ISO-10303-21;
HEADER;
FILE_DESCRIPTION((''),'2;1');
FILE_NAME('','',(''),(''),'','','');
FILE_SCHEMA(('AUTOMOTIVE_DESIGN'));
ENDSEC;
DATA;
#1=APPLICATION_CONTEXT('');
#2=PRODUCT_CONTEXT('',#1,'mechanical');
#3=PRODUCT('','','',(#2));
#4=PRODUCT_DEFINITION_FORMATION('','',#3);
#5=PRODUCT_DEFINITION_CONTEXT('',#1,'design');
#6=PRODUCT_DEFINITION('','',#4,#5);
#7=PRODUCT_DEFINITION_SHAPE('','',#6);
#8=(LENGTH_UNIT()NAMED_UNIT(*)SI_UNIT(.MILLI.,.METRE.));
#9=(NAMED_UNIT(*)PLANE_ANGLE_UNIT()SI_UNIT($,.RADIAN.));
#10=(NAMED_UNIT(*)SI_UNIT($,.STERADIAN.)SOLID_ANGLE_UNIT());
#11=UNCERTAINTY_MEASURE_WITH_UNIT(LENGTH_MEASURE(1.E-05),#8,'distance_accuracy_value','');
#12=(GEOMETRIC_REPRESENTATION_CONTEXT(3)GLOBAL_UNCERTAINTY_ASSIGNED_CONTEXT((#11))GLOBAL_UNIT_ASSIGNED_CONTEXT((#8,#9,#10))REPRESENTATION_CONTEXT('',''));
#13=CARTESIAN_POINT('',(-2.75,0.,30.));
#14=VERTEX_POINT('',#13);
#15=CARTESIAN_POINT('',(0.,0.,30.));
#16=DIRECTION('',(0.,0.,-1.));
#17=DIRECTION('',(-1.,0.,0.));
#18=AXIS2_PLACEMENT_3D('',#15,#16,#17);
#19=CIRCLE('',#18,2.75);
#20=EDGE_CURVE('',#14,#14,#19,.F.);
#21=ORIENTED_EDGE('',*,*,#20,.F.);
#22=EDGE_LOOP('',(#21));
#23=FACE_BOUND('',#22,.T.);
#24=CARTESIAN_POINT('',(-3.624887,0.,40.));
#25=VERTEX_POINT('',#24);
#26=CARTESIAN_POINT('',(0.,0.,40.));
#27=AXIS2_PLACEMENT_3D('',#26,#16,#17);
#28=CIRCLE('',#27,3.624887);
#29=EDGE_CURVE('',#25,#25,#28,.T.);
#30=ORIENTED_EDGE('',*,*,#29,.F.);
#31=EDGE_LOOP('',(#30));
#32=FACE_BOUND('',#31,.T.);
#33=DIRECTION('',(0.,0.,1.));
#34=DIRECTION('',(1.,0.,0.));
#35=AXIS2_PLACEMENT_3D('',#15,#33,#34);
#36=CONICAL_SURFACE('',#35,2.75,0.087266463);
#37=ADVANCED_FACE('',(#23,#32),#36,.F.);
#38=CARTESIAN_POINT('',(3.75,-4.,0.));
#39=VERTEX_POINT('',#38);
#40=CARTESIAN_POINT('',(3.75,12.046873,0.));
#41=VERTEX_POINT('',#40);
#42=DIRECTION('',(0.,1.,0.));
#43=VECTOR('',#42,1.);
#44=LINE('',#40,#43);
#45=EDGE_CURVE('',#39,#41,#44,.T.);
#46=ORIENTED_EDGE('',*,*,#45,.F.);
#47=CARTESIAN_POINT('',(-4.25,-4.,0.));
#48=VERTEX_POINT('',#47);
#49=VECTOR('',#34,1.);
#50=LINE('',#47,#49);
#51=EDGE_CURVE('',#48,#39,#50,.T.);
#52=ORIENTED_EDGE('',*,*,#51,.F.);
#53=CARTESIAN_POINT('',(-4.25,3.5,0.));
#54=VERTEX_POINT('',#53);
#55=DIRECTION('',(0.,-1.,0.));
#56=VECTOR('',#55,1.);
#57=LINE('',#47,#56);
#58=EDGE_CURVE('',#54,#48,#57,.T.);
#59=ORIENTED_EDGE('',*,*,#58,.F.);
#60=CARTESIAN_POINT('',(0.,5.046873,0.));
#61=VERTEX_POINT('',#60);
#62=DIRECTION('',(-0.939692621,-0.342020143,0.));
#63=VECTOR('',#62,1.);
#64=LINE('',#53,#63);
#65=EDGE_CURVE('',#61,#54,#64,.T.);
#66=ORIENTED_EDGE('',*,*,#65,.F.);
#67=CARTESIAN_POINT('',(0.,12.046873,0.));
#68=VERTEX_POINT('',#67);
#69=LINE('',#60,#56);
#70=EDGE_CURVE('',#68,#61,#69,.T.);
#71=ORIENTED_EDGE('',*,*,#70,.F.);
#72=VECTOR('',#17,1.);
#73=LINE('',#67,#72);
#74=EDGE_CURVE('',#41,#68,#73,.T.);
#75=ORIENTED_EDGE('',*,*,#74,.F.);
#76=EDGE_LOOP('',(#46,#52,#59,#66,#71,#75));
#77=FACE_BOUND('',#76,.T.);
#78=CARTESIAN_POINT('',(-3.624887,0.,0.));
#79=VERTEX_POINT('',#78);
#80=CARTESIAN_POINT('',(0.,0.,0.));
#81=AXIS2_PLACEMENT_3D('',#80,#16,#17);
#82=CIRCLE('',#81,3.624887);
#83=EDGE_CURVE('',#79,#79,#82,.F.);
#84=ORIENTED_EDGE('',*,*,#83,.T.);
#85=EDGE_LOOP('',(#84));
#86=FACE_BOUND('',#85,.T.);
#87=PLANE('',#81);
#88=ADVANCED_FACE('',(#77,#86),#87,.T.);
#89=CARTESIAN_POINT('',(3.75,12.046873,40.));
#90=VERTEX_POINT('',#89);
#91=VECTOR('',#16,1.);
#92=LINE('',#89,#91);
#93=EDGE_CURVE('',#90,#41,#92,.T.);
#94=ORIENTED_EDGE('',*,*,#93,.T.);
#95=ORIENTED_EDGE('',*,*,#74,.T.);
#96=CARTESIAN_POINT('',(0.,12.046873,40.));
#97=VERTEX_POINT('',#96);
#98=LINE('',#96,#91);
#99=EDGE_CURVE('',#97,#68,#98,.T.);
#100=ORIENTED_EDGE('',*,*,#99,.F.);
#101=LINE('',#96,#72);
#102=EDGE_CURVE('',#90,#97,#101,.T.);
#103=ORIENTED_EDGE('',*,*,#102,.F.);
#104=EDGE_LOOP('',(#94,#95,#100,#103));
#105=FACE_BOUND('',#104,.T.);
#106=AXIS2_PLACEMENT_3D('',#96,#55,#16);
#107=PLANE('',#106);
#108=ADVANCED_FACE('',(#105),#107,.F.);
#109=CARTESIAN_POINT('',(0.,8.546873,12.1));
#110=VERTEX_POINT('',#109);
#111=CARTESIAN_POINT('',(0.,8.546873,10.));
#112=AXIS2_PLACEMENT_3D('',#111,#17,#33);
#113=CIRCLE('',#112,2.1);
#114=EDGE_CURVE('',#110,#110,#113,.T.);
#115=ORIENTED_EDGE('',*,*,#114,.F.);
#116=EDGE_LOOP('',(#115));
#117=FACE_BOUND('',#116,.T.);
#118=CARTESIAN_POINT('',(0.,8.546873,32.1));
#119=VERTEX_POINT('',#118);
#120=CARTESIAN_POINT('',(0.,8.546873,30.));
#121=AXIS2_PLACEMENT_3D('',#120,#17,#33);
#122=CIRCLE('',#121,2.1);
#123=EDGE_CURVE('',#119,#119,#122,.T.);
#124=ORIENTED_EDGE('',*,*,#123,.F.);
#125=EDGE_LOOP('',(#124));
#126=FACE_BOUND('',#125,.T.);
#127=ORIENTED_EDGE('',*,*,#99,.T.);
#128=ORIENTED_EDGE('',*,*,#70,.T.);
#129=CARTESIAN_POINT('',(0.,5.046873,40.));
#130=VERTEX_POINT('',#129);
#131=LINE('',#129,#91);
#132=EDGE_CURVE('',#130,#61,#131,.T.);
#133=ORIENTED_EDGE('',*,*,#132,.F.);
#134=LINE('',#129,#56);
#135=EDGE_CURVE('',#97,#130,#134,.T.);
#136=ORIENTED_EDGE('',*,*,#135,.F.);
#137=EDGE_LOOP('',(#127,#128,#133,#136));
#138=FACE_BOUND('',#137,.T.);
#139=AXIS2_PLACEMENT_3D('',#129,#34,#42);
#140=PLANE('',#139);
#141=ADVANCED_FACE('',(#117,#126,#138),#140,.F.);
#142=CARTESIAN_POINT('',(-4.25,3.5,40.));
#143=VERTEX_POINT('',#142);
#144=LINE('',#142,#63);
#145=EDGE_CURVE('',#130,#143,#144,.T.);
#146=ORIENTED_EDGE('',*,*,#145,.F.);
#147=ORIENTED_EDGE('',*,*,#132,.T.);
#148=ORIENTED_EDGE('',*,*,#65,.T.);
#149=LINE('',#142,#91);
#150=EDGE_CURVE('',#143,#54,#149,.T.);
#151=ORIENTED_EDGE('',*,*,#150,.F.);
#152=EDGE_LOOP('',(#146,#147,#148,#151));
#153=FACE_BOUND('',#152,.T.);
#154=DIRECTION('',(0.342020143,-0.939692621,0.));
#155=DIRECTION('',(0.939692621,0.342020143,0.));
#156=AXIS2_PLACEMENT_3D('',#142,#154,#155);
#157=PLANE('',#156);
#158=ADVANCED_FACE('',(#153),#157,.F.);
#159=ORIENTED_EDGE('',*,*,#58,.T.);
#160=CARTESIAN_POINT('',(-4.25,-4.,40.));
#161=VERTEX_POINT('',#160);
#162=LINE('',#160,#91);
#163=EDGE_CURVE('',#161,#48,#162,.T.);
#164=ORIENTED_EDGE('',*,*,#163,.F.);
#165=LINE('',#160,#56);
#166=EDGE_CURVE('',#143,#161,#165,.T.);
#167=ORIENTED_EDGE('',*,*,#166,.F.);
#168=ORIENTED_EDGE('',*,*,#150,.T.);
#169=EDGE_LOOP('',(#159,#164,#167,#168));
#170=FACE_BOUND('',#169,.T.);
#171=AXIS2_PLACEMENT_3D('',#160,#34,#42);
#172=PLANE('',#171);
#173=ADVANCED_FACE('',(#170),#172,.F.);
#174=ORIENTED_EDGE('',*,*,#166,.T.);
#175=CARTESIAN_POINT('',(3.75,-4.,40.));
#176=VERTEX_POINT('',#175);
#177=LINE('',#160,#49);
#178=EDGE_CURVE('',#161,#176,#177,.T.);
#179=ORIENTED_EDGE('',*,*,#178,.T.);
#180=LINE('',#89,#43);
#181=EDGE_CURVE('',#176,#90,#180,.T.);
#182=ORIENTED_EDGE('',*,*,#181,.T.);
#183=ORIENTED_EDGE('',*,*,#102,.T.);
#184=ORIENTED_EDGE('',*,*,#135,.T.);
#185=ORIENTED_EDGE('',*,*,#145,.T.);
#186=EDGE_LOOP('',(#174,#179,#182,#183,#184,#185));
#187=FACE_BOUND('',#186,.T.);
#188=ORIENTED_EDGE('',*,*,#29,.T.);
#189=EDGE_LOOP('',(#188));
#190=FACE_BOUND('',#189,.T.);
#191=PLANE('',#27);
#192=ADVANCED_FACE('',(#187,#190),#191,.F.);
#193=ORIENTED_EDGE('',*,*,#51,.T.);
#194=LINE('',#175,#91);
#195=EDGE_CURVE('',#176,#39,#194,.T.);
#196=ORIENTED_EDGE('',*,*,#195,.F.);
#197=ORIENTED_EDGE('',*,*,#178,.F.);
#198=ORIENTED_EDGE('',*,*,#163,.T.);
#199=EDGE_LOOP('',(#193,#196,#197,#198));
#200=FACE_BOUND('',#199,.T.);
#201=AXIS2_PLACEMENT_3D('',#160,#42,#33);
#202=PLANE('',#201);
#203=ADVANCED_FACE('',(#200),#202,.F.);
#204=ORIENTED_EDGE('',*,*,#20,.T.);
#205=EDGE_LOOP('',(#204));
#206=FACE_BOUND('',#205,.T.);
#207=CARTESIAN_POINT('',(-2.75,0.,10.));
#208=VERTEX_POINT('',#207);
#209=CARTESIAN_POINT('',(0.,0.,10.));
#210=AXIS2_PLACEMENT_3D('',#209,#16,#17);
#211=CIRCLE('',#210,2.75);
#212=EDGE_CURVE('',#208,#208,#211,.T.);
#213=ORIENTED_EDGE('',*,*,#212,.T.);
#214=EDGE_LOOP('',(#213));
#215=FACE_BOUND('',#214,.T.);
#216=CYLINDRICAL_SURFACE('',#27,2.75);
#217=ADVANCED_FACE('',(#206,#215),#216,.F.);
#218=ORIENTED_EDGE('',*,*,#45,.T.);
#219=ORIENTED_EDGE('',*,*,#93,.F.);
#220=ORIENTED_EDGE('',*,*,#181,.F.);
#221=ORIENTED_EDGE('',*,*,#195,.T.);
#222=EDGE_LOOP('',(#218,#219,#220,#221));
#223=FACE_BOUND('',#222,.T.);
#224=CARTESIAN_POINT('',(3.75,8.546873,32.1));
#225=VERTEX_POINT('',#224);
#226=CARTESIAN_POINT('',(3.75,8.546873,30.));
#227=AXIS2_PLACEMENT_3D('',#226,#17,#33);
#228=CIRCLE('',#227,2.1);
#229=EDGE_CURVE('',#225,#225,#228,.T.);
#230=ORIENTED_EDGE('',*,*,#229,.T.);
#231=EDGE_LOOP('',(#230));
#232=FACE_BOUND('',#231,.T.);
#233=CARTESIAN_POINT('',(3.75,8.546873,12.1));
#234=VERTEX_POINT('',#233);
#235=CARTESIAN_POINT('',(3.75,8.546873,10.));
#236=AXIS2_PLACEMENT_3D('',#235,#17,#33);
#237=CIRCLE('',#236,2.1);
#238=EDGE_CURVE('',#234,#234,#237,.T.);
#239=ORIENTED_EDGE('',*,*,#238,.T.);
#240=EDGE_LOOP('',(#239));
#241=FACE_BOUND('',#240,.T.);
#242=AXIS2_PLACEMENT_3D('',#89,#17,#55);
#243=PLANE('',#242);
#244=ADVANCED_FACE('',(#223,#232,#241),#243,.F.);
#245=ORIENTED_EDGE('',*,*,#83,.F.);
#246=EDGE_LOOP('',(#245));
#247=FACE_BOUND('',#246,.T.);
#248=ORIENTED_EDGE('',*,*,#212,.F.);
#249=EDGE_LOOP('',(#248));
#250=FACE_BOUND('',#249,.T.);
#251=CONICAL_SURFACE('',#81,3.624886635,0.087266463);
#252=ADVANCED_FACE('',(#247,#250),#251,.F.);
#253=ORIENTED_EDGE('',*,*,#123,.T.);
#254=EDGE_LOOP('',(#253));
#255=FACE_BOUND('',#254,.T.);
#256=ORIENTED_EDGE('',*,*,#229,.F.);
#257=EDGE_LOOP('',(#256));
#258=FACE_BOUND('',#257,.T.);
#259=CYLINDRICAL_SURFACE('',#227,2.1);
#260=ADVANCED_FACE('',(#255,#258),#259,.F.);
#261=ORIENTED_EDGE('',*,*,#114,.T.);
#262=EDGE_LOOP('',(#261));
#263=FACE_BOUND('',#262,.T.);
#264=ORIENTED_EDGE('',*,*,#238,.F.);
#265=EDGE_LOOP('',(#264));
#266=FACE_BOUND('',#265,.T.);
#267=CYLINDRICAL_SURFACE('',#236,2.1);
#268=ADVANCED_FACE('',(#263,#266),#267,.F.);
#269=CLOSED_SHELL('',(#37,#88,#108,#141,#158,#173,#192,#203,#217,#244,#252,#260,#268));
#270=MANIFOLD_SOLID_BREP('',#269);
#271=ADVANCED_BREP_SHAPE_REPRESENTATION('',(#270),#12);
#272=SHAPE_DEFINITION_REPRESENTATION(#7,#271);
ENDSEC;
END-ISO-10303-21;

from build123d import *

# Parameters (mm, degrees)
BOSS_EXTRUDE1_DEPTH = 40
SKETCH2_R           = 2.1
CUT_EXTRUDE1_DEPTH  = 42.990351999
CHAMFER1_SIZE       = 10
CHAMFER1_SIZE2      = 0.874886635


with BuildPart() as part:
    # Sketch1 → Boss-Extrude1 (new body)
    with BuildSketch(Plane.XY):
        Polygon((-4.25, -4), (-4.25, 3.5), (0, 5.046873496), (0, 12.046873496), (3.75, 12.046873496), (3.75, -4), align=None)
        with BuildLine():
            ThreePointArc((2.75, 0), (0, 2.75), (-2.75, 0))
            ThreePointArc((-2.75, 0), (0, -2.75), (2.75, 0))
        make_face(mode=Mode.SUBTRACT)
    extrude(amount=BOSS_EXTRUDE1_DEPTH)

    # Sketch2 → Cut-Extrude1 (cut, through all)
    with BuildSketch(Plane.ZY):
        with Locations((10, 8.546873496)):
            Circle(SKETCH2_R)
        with Locations((30, 8.546873496)):
            Circle(SKETCH2_R)
    extrude(amount=-CUT_EXTRUDE1_DEPTH, mode=Mode.SUBTRACT)

    # Chamfer1
    chamfer1_edges = [part.edges().sort_by_distance(p)[0] for p in [
        (-2.75, 0, 40),
    ]]
    chamfer1_side = [part.faces().sort_by_distance(p)[0] for p in [
        (-2.75, 0, 20),
    ]]
    chamfer(chamfer1_edges, length=CHAMFER1_SIZE, length2=CHAMFER1_SIZE2, reference=chamfer1_side[0])

    # Chamfer2: read off the stored shape, not the designer's step
    # Chamfer2 outline → Chamfer2 (revolve, cut)
    with BuildSketch(Plane.XZ):
        Polygon((3.624886635, 0), (2.75, 10), (2.75, 0), align=None)
    revolve(axis=Axis((0, 0, 0), (0, 0, 1)), mode=Mode.SUBTRACT)


solid = part.part
